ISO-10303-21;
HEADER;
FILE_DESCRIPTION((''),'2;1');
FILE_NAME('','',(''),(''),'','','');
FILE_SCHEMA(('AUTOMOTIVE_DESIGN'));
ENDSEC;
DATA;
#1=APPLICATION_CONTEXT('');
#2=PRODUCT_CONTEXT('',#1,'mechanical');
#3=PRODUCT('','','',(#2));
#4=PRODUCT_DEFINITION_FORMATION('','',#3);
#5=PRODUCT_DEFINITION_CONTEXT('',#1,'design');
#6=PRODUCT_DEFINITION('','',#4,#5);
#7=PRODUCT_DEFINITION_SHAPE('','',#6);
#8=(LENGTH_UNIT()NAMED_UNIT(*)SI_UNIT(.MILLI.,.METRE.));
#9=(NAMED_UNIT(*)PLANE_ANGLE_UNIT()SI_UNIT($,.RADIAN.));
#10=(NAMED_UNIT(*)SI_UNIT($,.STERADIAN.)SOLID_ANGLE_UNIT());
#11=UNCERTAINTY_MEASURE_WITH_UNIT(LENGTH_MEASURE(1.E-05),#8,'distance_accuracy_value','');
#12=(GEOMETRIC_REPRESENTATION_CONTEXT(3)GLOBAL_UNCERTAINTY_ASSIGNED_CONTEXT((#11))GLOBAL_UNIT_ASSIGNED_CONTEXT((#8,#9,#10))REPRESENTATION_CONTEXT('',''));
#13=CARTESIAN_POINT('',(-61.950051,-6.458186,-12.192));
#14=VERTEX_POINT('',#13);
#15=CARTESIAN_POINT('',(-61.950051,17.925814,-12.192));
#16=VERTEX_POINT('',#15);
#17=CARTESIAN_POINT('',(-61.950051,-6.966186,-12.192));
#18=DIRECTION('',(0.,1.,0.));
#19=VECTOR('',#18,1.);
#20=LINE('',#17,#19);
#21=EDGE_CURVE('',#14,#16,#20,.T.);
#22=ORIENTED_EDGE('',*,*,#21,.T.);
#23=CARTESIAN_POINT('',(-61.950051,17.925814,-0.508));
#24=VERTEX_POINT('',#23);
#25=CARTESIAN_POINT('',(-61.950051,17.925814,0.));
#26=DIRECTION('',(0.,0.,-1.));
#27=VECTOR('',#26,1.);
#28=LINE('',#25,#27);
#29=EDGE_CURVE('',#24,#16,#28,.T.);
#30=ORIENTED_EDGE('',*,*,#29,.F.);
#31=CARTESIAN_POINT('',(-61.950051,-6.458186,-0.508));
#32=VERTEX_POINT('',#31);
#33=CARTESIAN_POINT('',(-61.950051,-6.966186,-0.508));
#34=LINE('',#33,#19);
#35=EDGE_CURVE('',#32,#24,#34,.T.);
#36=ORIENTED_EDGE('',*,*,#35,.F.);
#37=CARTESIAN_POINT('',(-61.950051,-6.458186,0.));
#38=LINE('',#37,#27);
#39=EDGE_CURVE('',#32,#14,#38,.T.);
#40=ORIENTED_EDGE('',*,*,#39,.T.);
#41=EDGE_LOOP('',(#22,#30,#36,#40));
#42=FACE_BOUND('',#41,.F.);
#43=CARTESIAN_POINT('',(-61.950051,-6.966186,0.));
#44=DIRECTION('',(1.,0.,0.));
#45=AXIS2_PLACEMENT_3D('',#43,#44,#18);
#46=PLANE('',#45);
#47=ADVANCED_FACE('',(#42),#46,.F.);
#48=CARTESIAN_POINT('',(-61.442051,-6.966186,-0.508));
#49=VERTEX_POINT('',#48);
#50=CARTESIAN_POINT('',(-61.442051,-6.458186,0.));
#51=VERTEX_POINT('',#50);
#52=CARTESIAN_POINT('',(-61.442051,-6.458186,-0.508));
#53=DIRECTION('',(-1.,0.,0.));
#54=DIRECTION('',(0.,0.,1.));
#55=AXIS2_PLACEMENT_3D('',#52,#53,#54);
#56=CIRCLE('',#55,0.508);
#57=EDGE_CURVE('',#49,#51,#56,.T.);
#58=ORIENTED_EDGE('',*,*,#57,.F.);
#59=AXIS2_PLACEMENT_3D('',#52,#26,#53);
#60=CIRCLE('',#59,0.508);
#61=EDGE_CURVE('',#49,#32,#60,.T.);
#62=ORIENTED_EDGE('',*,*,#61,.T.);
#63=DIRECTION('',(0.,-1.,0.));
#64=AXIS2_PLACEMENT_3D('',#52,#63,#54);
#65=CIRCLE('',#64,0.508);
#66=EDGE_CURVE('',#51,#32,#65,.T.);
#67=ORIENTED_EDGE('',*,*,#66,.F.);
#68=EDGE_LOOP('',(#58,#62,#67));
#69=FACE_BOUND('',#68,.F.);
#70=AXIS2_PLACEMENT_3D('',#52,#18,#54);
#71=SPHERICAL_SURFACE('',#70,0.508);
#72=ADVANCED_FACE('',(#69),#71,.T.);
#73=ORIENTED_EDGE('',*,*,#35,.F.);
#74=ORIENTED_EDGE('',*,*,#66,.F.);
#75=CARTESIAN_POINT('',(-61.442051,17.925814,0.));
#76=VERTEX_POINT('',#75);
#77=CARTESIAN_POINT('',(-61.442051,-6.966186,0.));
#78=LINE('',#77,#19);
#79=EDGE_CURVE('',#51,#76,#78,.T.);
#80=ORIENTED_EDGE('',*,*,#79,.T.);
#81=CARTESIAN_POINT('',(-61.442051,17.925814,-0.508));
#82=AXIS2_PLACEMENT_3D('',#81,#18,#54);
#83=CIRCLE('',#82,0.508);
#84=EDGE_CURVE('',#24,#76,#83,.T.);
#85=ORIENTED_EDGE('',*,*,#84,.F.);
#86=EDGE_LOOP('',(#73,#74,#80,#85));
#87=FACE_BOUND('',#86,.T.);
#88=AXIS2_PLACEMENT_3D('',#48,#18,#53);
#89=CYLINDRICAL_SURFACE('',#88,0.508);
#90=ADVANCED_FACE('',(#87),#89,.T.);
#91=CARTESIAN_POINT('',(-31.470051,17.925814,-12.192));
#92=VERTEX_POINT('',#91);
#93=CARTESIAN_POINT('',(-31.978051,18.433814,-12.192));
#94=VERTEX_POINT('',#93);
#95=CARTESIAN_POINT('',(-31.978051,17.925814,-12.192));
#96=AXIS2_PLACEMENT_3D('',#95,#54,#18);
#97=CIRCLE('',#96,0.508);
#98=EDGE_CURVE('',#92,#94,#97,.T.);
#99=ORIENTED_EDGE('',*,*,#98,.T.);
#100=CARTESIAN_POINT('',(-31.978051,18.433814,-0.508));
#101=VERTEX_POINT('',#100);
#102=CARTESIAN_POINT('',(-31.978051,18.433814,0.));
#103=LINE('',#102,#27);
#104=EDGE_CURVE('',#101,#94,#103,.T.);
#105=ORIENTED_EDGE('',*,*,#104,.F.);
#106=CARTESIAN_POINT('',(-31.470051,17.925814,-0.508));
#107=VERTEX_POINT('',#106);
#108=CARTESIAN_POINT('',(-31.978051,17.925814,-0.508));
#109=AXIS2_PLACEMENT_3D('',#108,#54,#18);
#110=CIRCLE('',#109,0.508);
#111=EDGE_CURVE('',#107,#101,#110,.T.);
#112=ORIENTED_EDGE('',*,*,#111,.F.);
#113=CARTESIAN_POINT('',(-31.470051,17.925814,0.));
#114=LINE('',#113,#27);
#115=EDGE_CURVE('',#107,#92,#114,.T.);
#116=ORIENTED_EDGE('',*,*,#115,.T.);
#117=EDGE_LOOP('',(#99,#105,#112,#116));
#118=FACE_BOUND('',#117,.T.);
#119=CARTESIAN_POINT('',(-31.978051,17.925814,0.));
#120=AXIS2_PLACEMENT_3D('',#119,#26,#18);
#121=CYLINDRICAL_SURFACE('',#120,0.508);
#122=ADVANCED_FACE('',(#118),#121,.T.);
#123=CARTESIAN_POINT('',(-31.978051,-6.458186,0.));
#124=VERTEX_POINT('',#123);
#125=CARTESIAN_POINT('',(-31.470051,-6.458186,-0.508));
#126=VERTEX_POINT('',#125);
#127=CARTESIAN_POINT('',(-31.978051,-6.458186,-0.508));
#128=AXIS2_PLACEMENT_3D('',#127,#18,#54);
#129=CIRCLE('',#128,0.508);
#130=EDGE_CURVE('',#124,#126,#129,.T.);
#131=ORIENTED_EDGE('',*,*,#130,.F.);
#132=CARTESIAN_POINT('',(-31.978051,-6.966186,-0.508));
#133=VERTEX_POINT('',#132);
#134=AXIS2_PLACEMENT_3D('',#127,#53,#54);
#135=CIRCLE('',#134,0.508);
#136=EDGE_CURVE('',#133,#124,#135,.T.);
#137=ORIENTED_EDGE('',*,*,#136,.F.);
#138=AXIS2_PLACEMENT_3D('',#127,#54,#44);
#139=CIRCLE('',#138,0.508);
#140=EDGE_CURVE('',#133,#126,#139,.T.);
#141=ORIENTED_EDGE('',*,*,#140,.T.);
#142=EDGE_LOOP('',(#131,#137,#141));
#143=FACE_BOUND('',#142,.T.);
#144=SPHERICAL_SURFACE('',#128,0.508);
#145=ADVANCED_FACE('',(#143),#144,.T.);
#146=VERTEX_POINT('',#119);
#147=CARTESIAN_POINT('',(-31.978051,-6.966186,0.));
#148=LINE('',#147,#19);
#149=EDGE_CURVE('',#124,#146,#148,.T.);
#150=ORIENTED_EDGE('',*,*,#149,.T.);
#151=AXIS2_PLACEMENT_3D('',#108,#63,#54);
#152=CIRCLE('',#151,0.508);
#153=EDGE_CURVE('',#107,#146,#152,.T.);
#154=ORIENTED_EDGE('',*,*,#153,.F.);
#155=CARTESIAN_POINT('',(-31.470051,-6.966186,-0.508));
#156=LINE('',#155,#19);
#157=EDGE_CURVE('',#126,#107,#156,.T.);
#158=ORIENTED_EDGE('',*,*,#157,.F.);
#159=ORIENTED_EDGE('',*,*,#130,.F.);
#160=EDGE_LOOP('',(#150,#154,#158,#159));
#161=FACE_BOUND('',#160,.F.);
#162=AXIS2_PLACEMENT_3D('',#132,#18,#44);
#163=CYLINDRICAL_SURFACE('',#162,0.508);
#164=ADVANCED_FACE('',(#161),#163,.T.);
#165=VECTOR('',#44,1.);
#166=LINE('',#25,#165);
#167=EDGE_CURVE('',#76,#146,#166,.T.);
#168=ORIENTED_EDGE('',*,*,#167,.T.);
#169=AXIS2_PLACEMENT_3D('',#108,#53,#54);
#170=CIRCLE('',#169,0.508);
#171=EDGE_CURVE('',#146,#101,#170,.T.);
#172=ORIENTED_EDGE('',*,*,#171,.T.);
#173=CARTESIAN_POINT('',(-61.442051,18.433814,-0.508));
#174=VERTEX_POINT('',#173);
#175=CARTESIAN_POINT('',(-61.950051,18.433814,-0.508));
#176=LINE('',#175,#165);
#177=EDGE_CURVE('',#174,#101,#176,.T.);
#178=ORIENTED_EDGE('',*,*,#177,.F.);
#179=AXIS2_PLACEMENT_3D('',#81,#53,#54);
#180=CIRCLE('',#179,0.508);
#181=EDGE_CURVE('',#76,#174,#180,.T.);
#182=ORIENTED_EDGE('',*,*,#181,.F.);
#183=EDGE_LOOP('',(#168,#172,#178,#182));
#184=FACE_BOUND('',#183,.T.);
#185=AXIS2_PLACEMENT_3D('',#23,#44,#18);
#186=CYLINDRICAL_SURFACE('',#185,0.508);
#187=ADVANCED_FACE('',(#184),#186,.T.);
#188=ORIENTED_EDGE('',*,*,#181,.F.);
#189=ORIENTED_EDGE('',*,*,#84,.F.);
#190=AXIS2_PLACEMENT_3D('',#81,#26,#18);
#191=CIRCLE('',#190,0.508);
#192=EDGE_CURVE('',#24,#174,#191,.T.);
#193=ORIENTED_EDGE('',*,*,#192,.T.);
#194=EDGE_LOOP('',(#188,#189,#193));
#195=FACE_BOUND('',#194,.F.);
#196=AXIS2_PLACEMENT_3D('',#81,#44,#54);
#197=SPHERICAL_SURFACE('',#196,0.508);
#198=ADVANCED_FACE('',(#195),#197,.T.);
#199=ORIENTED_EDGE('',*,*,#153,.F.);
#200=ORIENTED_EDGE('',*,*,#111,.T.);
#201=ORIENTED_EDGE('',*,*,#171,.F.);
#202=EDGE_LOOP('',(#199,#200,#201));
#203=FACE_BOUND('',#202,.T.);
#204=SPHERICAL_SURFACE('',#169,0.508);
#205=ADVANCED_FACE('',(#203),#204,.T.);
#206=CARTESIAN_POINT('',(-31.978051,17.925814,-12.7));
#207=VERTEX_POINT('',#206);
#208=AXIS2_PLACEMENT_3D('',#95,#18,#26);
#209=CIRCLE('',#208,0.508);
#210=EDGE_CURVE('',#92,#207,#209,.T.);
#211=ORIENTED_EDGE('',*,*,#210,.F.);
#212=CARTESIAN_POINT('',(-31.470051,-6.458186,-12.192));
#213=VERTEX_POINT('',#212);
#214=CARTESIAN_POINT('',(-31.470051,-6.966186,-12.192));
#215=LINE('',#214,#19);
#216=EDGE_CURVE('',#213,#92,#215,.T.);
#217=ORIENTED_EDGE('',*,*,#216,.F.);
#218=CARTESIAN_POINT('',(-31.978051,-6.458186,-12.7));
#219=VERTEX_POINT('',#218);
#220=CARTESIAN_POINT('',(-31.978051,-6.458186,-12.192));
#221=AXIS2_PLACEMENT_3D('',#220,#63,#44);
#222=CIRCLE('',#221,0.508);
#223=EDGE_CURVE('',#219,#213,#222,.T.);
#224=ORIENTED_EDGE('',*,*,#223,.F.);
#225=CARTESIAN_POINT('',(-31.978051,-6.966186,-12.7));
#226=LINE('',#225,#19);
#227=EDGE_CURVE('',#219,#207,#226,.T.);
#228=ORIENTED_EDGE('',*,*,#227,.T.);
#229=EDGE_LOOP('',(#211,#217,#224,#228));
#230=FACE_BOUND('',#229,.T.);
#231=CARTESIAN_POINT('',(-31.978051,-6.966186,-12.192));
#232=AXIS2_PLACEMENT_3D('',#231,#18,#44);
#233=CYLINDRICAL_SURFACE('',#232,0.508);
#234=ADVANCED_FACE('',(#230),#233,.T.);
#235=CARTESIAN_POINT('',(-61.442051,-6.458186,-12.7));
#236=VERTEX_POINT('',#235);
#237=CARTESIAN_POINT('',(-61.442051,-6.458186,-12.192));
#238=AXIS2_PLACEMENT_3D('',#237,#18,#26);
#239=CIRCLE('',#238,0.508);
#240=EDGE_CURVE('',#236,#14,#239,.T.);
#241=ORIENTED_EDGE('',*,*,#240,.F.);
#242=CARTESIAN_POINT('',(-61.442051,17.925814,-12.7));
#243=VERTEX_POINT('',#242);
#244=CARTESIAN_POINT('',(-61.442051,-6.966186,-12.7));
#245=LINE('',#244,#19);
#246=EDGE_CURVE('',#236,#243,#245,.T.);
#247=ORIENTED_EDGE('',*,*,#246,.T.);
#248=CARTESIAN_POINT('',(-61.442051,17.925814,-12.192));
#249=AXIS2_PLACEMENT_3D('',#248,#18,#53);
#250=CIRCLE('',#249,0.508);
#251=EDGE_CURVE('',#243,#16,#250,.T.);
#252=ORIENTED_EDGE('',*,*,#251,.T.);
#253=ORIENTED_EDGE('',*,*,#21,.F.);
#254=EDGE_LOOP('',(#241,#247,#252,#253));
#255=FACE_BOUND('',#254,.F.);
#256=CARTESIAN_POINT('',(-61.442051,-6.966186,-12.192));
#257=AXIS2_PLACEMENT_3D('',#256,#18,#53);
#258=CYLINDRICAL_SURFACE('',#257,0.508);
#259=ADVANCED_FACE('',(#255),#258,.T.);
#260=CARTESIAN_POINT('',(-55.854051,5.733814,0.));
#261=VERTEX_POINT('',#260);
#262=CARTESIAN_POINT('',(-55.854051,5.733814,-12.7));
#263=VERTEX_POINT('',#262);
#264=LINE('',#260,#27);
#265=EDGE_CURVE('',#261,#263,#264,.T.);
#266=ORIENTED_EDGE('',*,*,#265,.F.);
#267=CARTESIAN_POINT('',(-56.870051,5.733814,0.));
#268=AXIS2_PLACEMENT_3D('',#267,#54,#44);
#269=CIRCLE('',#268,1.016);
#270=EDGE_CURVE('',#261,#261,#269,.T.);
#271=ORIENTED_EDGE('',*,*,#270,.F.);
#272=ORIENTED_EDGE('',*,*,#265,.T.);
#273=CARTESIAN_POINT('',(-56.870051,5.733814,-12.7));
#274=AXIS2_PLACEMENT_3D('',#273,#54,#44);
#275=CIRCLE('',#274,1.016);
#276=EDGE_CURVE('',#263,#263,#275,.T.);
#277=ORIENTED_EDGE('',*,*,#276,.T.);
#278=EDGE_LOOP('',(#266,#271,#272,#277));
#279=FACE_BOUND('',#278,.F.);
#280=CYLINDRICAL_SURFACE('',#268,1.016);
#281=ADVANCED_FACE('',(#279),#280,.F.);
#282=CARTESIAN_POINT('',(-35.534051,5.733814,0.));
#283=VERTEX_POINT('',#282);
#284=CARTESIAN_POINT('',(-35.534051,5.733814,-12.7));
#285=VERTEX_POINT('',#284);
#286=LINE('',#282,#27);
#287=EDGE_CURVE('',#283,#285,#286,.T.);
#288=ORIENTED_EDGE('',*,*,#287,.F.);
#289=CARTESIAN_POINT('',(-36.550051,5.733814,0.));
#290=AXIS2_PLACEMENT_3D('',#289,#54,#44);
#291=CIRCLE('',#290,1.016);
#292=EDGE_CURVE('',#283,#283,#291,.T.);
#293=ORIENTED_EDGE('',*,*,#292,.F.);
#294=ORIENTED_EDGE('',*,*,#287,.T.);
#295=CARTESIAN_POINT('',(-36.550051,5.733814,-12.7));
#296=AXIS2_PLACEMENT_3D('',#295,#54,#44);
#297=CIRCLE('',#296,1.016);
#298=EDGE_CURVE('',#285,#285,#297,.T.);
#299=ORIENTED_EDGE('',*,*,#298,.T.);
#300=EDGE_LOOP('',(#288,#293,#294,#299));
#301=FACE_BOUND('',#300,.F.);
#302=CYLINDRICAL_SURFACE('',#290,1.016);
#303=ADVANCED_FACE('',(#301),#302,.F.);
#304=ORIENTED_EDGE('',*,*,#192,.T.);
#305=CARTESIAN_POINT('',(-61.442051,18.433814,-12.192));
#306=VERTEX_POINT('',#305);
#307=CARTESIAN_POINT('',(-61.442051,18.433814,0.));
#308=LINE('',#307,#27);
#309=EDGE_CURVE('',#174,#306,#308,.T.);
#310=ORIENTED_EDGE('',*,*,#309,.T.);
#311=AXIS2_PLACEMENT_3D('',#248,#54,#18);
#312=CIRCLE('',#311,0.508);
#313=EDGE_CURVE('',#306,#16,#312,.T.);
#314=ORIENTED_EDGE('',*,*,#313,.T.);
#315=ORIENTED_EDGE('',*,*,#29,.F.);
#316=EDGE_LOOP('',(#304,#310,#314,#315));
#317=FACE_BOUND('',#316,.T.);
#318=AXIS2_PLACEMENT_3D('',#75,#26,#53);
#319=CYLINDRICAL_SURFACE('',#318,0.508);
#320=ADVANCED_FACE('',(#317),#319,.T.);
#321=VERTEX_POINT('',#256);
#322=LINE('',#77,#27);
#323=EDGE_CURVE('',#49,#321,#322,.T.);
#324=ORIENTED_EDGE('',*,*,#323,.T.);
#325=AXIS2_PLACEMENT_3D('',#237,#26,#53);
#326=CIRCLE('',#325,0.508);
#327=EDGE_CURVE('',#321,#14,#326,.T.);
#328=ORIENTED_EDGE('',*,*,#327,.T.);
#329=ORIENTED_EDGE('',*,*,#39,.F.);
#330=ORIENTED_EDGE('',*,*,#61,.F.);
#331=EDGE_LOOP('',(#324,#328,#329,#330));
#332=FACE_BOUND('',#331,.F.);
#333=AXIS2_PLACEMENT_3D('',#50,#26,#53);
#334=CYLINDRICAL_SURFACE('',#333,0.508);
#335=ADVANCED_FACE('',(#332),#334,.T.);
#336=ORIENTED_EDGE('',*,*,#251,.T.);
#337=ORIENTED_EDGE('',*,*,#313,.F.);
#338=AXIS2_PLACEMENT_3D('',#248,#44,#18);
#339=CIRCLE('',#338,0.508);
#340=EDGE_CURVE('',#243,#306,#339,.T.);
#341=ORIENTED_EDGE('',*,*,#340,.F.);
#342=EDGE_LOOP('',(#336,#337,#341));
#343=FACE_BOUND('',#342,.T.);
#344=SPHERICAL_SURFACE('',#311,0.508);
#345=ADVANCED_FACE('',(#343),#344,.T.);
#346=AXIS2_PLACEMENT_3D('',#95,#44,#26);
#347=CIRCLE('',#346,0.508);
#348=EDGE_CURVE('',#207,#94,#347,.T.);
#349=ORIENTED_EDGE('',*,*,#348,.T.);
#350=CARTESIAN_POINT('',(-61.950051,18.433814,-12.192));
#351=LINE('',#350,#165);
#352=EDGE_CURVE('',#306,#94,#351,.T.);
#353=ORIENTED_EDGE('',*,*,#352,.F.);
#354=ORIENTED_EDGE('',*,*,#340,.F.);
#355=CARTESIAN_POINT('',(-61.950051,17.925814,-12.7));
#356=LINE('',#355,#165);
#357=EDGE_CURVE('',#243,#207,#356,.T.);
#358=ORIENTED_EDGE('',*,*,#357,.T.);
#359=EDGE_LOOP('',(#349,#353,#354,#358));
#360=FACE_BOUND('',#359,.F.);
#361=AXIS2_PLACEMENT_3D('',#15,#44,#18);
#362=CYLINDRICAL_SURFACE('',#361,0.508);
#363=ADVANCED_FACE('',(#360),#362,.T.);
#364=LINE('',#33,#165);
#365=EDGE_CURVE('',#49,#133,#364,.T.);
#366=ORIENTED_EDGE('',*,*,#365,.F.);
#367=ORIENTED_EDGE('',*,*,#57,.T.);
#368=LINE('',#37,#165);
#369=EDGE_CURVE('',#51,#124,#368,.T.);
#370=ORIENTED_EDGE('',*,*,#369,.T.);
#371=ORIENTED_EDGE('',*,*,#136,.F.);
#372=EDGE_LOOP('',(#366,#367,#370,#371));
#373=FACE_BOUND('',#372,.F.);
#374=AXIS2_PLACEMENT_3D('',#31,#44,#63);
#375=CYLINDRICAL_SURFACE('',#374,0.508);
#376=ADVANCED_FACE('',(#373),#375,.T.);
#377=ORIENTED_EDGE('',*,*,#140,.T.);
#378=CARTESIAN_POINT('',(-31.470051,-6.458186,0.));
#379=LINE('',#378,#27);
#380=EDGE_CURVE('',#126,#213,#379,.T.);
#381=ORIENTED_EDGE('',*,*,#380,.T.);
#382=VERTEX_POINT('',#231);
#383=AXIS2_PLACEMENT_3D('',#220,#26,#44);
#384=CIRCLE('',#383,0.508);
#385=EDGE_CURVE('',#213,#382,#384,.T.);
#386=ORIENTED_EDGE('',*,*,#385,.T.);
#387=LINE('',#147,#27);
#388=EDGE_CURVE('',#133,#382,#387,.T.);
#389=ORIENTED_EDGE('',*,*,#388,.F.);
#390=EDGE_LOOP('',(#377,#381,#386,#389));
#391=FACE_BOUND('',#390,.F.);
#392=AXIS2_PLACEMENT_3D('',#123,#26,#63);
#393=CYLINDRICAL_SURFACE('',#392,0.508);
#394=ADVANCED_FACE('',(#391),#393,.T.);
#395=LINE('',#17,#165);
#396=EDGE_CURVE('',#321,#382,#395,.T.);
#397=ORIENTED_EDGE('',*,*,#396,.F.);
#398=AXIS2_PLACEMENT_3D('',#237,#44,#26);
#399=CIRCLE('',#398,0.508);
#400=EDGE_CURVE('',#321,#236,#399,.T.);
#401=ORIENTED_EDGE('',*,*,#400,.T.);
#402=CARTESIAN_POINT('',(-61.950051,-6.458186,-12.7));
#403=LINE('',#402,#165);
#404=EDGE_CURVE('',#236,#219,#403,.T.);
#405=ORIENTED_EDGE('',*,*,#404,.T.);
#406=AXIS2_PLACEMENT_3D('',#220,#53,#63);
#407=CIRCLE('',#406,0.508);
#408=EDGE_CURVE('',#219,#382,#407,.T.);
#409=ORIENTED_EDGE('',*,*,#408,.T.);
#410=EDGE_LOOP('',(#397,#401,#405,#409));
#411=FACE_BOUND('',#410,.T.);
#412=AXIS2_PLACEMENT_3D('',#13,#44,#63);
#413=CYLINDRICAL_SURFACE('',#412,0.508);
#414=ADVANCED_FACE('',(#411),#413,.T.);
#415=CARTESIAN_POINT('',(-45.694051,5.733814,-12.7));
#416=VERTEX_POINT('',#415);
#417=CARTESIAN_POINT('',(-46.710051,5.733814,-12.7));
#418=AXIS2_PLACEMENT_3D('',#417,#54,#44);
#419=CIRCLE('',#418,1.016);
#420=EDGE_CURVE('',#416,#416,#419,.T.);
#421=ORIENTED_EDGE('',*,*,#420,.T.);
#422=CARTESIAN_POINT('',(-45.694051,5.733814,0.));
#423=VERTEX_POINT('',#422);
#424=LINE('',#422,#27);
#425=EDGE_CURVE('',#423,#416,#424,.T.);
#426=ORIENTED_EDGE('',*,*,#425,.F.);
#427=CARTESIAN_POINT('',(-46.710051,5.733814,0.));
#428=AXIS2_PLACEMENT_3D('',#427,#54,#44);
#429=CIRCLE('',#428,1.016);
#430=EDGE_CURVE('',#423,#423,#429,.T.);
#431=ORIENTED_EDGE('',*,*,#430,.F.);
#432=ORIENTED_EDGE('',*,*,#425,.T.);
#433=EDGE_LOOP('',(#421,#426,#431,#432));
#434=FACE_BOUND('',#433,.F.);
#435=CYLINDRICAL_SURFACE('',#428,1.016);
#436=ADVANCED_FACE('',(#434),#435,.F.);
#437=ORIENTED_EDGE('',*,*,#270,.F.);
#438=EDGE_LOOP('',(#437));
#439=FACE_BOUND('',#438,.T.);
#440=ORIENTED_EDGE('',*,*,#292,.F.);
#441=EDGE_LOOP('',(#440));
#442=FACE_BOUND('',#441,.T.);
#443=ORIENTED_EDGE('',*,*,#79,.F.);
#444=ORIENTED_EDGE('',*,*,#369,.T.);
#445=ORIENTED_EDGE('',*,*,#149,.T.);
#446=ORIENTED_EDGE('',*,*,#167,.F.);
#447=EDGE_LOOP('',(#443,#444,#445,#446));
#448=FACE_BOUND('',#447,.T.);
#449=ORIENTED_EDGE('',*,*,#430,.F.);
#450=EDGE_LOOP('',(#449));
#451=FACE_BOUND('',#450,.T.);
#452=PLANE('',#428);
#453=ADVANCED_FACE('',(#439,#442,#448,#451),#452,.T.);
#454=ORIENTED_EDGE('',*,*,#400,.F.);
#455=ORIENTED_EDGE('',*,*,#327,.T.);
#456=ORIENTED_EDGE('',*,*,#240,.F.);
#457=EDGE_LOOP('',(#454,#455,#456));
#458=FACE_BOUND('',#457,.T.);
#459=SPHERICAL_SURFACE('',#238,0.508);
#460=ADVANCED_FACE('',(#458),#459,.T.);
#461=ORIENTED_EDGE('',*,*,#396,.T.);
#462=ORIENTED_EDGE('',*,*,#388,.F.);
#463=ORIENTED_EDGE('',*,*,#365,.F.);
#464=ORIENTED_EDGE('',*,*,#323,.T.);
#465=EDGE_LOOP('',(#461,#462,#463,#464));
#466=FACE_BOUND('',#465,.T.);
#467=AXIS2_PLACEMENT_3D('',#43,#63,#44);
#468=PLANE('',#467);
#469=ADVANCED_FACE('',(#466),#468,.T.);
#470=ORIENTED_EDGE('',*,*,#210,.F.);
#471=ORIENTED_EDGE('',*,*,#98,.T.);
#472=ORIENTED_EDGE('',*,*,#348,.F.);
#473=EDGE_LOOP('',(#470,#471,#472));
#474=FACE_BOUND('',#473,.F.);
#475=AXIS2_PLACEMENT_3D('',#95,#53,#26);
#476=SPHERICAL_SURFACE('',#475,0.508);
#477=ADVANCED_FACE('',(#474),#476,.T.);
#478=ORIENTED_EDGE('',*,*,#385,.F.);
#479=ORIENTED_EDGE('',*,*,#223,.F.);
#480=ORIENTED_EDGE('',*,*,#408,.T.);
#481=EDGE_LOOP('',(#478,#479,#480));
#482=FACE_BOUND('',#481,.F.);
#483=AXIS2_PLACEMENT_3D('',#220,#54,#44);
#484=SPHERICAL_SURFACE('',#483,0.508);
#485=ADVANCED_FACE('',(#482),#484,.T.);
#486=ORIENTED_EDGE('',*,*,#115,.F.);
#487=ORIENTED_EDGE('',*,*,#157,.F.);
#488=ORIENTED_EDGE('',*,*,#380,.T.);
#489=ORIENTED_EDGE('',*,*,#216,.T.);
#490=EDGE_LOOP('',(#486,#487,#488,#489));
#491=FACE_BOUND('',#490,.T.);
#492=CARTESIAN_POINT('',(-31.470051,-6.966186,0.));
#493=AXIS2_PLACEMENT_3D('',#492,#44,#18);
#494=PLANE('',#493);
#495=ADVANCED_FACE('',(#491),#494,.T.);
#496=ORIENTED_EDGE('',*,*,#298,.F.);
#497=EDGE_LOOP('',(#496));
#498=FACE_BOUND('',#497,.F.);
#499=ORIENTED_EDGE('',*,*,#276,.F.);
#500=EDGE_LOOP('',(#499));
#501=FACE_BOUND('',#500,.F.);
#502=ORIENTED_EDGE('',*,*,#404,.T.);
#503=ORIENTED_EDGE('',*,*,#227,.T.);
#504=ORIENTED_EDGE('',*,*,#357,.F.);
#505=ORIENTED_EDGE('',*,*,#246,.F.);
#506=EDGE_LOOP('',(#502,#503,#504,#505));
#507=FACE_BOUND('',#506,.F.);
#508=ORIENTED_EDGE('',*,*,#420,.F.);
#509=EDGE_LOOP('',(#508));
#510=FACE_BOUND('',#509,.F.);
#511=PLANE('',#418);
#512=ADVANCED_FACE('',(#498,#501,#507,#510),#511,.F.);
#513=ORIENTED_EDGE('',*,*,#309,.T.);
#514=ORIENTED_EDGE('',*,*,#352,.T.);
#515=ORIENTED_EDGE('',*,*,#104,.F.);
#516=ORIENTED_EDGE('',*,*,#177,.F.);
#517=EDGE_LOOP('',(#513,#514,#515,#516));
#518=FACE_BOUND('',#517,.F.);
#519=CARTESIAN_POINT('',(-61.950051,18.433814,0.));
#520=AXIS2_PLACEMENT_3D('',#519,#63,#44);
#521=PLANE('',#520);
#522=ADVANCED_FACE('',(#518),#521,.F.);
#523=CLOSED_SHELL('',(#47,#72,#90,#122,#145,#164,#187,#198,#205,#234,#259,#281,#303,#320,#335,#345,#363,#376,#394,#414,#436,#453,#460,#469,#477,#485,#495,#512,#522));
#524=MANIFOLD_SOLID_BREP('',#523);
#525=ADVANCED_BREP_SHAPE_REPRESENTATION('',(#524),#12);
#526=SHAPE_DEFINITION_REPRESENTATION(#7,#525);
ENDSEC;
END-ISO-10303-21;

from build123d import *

# Parameters (mm, degrees)
F0_W     = 30.48
F0_H     = 25.4
F0_R     = 1.016
F1_DEPTH = 12.7
F2_R     = 0.508


# Not quite as in the source:
# - a feature names something its author has since deleted; it is built from what else it names


with BuildPart() as f1:
    # F0 (on Top) → F1 (new body)
    with BuildSketch(Plane.XY):
        with Locations((-46.7100512166, 5.7338142046)):
            Rectangle(F0_W, F0_H)
        with Locations((-56.8700512166, 5.7338142046)):
            Circle(F0_R, mode=Mode.SUBTRACT)
        with Locations((-46.7100512166, 5.7338142046)):
            Circle(F0_R, mode=Mode.SUBTRACT)
        with Locations((-36.5500512166, 5.7338142046)):
            Circle(F0_R, mode=Mode.SUBTRACT)
    extrude(amount=-F1_DEPTH)

    # F2
    f2_edges = [f1.edges().sort_by_distance(p)[0] for p in [
        (-46.710051, 18.433814, 0),
        (-61.950051, 5.733814, 0),
        (-61.950051, 18.433814, -6.35),
        (-46.710051, 18.433814, -12.7),
        (-61.950051, 5.733814, -12.7),
        (-31.470051, 5.733814, 0),
        (-46.710051, -6.966186, 0),
        (-31.470051, -6.966186, -6.35),
        (-31.470051, 5.733814, -12.7),
        (-46.710051, -6.966186, -12.7),
        (-31.470051, 18.433814, -6.35),
        (-61.950051, -6.966186, -6.35),
    ]]
    fillet(f2_edges, radius=F2_R)


solid = f1.part
